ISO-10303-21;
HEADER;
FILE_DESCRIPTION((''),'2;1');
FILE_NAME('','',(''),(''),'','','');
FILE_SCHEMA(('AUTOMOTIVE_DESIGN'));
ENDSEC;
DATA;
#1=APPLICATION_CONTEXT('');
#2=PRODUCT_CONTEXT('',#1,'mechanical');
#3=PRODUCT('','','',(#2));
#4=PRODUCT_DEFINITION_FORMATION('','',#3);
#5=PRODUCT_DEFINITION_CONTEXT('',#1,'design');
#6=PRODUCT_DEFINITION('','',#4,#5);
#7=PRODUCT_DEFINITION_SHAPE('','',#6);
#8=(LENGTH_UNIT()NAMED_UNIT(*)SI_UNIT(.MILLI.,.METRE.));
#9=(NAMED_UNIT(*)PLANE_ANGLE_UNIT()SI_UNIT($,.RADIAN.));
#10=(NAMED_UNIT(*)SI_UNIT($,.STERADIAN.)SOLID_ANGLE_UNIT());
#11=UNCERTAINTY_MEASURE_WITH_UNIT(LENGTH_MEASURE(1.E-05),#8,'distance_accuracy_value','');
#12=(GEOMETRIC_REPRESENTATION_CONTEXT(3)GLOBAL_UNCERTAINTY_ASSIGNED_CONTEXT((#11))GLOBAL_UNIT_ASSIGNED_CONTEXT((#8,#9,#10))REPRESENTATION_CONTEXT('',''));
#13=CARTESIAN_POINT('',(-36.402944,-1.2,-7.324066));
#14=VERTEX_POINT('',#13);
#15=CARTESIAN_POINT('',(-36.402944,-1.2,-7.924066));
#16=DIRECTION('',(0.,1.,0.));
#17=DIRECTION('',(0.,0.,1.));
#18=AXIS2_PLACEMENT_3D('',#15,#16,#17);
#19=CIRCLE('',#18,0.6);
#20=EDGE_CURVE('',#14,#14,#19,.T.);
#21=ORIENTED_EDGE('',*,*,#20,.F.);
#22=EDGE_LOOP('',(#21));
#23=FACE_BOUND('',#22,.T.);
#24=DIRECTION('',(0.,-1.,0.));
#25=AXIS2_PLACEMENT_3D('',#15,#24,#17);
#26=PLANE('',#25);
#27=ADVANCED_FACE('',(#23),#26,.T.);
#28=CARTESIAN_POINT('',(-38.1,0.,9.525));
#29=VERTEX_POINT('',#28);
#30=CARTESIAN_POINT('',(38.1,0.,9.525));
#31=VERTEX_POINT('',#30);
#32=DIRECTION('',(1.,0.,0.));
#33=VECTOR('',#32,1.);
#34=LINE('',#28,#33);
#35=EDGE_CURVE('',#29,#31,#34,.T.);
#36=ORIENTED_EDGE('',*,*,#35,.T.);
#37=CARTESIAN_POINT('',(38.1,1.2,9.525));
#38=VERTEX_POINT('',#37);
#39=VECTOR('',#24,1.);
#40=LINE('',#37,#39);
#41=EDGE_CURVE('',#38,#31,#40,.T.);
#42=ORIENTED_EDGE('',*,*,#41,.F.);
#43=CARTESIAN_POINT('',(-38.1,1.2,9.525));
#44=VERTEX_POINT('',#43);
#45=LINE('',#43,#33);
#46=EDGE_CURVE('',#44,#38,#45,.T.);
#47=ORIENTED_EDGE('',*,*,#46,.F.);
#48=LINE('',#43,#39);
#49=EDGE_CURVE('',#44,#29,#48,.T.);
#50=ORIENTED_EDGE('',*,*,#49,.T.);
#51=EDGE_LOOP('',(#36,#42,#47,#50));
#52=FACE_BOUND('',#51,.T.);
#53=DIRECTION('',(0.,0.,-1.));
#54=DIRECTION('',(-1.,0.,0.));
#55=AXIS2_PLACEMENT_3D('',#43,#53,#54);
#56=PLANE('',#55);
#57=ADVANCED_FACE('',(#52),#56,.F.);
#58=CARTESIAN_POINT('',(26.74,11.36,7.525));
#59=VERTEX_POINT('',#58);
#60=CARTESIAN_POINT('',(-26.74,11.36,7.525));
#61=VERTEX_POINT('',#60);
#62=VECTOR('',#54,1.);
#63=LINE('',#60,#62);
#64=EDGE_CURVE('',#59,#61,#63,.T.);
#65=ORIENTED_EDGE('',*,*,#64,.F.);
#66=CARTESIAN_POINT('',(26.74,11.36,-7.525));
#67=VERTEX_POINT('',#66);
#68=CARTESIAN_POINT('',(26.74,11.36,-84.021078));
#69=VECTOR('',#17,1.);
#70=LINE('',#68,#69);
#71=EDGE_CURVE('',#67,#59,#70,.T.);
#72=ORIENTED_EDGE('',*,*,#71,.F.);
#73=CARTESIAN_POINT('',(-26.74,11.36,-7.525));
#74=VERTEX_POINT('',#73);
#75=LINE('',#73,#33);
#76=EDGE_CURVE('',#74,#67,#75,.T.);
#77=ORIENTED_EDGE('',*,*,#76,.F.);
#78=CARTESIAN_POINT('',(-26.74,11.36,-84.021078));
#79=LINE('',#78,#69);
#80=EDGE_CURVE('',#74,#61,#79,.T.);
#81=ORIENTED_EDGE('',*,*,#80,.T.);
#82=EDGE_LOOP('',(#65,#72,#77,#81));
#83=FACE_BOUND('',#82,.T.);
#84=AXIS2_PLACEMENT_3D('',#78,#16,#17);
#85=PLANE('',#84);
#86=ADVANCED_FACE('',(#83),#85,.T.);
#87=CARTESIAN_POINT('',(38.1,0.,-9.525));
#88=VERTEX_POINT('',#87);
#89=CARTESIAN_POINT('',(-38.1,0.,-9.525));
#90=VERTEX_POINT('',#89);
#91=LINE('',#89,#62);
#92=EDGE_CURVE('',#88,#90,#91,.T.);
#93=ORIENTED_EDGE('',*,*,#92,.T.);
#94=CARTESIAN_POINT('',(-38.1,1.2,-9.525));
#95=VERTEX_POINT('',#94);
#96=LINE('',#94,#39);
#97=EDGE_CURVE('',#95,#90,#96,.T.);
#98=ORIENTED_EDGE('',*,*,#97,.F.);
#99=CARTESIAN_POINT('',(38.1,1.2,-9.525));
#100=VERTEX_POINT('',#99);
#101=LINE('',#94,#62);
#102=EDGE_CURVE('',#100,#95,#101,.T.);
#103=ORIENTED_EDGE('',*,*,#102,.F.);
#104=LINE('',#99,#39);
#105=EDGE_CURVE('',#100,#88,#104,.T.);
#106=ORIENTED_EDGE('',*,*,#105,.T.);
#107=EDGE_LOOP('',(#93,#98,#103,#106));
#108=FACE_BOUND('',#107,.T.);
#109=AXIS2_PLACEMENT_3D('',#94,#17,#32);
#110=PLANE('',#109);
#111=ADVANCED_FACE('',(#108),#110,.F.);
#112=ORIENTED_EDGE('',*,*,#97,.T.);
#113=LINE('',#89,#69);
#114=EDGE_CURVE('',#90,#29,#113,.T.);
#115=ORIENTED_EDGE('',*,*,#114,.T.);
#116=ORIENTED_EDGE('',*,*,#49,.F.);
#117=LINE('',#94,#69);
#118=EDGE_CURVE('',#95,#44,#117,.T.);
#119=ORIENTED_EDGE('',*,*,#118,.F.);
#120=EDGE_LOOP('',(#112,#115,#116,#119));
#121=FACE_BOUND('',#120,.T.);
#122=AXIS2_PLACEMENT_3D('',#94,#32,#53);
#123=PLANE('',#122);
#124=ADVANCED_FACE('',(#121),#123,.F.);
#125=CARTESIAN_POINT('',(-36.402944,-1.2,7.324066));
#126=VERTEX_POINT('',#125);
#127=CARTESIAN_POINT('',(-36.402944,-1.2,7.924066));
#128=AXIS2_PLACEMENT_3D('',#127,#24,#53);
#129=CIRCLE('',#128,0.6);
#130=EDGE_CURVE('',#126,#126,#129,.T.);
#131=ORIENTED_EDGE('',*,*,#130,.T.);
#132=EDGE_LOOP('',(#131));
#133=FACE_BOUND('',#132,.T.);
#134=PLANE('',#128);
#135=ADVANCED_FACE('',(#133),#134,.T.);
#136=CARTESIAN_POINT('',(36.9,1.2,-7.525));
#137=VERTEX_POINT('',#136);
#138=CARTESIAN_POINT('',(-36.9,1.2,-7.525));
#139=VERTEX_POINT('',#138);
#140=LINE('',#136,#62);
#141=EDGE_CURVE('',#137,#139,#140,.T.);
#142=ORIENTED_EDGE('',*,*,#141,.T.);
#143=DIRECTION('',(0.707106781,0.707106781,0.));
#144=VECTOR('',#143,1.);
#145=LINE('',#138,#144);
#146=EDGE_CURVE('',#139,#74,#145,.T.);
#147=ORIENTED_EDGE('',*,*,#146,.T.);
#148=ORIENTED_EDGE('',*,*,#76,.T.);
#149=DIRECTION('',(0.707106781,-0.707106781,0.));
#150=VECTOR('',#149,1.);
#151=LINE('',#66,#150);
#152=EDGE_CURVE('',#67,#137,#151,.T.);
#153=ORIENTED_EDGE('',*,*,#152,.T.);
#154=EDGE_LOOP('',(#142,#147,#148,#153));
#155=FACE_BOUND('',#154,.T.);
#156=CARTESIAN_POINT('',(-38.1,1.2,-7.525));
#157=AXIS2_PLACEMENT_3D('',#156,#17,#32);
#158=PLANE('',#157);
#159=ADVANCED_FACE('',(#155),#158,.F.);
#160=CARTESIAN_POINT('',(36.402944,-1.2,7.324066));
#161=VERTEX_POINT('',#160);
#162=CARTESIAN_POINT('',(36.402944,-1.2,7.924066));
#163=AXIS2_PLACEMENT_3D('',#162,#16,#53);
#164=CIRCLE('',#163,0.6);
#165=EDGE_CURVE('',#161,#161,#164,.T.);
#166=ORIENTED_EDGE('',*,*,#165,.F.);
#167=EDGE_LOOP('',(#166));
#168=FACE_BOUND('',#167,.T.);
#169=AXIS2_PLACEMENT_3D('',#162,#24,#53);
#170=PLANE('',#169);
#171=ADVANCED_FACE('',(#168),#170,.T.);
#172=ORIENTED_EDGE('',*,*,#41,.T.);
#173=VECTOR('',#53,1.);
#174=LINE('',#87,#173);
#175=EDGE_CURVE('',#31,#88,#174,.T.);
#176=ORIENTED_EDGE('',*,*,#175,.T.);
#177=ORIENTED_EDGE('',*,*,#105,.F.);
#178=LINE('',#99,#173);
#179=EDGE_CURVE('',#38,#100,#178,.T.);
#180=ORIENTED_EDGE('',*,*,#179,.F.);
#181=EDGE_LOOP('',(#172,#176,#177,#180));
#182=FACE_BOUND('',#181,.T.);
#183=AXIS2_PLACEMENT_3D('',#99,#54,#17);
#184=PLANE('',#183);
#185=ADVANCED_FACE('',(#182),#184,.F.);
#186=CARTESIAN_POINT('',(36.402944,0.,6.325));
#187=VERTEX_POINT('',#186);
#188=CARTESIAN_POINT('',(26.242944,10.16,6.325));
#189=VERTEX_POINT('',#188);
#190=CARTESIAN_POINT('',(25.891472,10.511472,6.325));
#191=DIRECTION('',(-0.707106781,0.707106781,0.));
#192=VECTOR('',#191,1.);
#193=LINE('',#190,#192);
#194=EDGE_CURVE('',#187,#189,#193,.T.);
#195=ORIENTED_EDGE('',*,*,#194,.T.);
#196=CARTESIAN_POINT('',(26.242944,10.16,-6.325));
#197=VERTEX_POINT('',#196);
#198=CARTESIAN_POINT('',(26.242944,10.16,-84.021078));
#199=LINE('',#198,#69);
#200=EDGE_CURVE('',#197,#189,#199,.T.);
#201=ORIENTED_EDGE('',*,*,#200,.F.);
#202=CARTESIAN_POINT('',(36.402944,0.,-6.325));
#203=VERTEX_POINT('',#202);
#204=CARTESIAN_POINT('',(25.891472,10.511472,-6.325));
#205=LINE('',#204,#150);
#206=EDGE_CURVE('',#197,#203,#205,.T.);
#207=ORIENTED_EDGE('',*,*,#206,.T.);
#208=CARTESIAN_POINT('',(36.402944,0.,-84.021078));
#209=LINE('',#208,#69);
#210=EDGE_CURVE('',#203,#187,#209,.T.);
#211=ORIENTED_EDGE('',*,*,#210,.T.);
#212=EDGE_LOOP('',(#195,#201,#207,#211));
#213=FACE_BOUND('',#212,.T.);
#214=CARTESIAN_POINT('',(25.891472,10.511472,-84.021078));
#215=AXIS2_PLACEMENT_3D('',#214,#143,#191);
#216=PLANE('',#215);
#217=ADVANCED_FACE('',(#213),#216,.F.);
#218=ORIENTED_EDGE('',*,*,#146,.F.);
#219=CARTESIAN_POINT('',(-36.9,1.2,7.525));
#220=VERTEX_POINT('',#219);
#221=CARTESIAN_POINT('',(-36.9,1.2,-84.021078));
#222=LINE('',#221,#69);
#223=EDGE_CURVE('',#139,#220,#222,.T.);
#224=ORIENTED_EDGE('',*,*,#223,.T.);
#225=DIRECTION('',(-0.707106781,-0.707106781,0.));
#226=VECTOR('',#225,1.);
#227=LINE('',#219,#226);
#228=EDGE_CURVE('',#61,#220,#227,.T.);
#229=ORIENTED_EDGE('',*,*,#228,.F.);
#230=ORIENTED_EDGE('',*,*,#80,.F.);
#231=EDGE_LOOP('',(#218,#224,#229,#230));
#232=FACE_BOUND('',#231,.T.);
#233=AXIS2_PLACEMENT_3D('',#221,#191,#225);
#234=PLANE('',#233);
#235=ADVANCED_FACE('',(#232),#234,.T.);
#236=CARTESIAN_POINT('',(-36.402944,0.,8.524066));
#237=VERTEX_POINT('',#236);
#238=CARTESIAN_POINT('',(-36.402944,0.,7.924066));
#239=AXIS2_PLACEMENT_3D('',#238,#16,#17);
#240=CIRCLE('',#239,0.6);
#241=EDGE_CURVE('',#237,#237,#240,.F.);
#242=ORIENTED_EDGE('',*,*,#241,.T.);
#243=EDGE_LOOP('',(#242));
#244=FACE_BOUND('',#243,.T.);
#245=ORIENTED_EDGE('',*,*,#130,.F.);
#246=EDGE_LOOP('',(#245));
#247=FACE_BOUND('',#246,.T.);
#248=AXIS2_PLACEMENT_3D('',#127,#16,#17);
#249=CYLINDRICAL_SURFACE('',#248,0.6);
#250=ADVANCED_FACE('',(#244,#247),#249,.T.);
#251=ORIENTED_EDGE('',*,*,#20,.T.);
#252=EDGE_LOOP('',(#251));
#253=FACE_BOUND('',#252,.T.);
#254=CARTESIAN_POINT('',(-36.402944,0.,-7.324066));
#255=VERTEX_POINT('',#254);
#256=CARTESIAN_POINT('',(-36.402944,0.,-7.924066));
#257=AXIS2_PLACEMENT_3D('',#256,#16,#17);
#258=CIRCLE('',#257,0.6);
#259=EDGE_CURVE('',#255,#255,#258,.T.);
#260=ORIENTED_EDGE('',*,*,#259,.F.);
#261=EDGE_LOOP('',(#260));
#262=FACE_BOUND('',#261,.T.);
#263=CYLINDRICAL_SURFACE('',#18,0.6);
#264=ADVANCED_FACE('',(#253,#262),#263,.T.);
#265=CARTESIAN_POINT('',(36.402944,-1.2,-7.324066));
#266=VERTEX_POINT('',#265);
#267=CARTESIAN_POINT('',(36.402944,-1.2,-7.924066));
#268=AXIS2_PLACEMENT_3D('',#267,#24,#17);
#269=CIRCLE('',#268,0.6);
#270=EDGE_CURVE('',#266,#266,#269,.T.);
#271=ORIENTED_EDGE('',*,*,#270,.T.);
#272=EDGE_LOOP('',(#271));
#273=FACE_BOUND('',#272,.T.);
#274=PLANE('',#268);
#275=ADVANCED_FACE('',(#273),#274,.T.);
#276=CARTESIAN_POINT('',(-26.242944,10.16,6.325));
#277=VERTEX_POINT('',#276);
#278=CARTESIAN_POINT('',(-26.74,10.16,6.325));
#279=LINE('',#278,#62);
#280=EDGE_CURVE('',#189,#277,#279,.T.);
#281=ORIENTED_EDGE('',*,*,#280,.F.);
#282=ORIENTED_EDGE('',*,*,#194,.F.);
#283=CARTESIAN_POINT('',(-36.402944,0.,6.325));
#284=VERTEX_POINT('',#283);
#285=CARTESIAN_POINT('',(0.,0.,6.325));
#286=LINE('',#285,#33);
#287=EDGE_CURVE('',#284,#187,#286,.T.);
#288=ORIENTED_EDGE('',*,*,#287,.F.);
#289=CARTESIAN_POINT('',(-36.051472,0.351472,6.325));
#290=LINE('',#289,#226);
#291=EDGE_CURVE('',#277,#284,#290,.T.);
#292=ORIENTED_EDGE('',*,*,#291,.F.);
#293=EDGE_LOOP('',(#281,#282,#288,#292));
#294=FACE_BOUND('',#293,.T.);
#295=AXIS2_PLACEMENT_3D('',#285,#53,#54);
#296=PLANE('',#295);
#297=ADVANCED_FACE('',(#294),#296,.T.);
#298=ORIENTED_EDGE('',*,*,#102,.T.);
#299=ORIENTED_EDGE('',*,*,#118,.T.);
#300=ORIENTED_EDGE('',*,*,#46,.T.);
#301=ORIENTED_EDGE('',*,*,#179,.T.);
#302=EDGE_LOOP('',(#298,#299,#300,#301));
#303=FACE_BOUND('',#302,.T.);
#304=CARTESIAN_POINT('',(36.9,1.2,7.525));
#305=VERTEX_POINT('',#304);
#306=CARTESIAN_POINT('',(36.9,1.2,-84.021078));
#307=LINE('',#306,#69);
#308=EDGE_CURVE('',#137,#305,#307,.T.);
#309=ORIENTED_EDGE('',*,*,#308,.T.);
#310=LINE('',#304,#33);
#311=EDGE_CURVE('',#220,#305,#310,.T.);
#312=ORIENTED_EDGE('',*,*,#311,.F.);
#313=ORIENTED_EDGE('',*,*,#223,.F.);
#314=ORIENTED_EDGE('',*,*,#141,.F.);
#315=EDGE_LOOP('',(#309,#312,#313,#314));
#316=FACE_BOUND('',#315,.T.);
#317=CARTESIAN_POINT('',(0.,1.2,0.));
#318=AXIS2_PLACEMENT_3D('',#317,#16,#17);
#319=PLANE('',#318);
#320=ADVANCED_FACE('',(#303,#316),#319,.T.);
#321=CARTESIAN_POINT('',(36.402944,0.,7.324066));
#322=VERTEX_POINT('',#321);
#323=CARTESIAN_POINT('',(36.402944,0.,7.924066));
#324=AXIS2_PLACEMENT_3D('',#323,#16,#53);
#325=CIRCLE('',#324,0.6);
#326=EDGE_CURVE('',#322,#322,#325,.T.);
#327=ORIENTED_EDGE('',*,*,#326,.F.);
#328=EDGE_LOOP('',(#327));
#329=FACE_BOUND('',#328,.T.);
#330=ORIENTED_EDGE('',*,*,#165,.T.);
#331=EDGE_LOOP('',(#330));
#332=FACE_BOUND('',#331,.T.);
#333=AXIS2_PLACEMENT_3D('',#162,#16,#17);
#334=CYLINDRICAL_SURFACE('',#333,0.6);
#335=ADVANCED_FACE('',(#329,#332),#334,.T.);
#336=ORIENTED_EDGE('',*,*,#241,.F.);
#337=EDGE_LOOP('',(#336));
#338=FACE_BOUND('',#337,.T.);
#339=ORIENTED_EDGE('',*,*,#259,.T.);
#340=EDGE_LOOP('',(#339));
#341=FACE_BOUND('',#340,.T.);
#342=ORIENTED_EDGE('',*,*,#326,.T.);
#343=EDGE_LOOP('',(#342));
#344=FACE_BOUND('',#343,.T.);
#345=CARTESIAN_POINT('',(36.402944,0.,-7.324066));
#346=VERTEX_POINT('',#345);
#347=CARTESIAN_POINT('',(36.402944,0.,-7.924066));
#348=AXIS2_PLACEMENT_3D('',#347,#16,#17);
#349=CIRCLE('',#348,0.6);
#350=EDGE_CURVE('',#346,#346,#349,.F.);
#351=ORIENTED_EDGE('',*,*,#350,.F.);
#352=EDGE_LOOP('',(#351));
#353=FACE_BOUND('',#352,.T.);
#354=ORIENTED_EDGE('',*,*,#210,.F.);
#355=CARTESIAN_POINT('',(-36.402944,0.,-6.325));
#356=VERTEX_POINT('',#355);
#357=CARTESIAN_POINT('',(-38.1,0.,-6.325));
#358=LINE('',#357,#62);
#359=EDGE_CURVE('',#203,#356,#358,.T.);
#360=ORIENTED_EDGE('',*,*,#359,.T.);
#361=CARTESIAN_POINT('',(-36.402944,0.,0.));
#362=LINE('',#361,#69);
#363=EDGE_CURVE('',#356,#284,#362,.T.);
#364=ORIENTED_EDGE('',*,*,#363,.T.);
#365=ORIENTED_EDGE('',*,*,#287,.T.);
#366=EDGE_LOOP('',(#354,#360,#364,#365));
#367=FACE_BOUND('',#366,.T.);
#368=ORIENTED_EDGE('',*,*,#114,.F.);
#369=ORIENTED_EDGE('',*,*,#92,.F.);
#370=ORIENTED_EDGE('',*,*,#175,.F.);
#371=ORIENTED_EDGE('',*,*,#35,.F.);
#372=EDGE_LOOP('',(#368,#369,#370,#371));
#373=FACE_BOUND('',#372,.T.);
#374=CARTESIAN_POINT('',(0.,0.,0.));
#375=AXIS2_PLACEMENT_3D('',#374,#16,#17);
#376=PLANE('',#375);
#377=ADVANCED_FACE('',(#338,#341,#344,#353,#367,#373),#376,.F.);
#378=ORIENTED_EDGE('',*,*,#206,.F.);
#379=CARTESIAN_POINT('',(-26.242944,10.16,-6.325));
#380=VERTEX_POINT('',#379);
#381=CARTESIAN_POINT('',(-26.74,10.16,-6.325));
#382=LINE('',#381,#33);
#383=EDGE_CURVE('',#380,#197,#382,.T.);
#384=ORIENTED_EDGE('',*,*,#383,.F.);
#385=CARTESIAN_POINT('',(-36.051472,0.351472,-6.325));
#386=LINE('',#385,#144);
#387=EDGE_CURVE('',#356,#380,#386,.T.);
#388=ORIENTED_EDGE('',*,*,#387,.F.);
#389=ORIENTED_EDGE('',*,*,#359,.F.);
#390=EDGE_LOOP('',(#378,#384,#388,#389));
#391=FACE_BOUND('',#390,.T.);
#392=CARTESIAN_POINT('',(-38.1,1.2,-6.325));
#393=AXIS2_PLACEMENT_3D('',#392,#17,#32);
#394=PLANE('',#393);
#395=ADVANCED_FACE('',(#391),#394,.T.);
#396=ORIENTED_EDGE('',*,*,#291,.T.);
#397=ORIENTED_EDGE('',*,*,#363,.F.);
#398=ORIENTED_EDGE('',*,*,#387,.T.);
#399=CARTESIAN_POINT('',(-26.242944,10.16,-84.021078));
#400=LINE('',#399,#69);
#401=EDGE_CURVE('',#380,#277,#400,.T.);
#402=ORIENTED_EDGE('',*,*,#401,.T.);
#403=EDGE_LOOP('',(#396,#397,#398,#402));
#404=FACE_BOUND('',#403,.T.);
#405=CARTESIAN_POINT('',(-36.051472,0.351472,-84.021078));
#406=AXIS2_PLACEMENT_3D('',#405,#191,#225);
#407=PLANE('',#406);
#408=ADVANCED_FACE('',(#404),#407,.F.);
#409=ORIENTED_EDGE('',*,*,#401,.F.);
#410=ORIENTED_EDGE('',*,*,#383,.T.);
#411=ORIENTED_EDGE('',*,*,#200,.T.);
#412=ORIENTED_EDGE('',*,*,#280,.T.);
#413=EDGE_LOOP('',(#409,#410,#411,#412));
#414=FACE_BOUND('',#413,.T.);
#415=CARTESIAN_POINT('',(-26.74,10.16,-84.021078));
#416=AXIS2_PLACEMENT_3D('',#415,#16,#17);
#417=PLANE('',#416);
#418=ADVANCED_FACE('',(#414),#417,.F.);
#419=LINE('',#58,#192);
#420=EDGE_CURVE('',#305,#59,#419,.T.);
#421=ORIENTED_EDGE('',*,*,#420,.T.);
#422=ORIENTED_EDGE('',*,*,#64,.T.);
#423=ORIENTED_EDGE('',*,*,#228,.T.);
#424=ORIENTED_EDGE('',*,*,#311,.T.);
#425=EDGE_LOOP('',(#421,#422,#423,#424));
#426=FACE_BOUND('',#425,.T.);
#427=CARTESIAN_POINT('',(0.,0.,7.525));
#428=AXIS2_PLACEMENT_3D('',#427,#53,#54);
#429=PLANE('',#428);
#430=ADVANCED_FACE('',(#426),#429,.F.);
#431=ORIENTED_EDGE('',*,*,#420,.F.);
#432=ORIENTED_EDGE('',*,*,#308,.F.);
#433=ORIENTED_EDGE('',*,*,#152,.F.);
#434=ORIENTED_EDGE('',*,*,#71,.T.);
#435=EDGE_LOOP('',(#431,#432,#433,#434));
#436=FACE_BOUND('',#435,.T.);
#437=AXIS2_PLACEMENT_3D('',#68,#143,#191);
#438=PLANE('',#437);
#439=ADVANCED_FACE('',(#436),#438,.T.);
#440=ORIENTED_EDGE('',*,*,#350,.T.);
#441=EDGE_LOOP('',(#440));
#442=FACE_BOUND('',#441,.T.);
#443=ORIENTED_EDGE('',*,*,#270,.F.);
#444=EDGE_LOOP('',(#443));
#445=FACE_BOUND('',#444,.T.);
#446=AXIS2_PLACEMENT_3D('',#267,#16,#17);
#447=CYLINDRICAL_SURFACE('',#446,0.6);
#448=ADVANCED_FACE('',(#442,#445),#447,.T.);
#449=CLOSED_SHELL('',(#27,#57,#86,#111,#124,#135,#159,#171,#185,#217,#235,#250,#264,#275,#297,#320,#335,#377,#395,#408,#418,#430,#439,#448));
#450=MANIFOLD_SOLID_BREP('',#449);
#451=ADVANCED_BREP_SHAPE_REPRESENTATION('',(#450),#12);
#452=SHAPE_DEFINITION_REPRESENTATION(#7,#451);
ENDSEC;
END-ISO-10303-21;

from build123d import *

# Parameters (mm, degrees)
SKETCH1_W               = 76.2
SKETCH1_H               = 19.05
BOSS_EXTRUDE1_DEPTH     = 1.2
BOSS_EXTRUDE2_START     = -2
BOSS_EXTRUDE2_DEPTH     = 15.05
SHELL1_START            = -6.325
SHELL1_DEPTH            = 12.65
SKETCH3_R               = 0.6
BOSS_EXTRUDE3_DEPTH     = 1.2
MIRROR2_COPY_1_SKETCH_R = 0.6
MIRROR2_COPY_1_DEPTH    = 1.2


# Read off the part's stored shape, not the designer's step: Shell1
with BuildPart() as part:
    # Sketch1 → Boss-Extrude1 (new body)
    with BuildSketch(Plane(origin=(0, 0, 0), x_dir=(1, 0, 0), z_dir=(0, 1, 0))):
        Rectangle(SKETCH1_W, SKETCH1_H)
    extrude(amount=BOSS_EXTRUDE1_DEPTH)

    # Sketch2 → Boss-Extrude2 (add)
    with BuildSketch(Plane.XY.offset(9.525).offset(BOSS_EXTRUDE2_START)):
        Polygon((-36.9, 1.2), (-26.74, 11.36), (26.74, 11.36), (36.9, 1.2), align=None)
    extrude(amount=-BOSS_EXTRUDE2_DEPTH)

    # Shell1 outline → Shell1 (cut)
    with BuildSketch(Plane.XY.offset(SHELL1_START)):
        Polygon((26.242943725, 10.16), (-26.242943725, 10.16), (-36.402943725, 0), (36.402943725, 0), align=None)
    extrude(amount=SHELL1_DEPTH, mode=Mode.SUBTRACT)

    # Sketch3 → Boss-Extrude3 (add)
    with BuildSketch(Plane.XZ):
        with Locations(Location((-36.402943725, 7.924066334, 0), (0, 0, 90))):
            Circle(SKETCH3_R)
    boss_extrude3 = extrude(amount=BOSS_EXTRUDE3_DEPTH)

    # Mirror1: Boss-Extrude3 across plane
    add(boss_extrude3.mirror(Plane.XY))

    # Mirror2: Boss-Extrude3 across plane
    add(boss_extrude3.mirror(Plane(origin=(0, 0, 0), x_dir=(0, 0, 1), z_dir=(1, 0, 0))))

    # Mirror2 copy 1 sketch → Mirror2 copy 1 (add)
    with BuildSketch(Plane(origin=(0, 0, 0), x_dir=(-1, 0, 0), z_dir=(0, -1, 0))):
        with Locations(Location((-36.402943725, 7.924066334, 0), (0, 0, 90))):
            Circle(MIRROR2_COPY_1_SKETCH_R)
    extrude(amount=MIRROR2_COPY_1_DEPTH)


solid = part.part
